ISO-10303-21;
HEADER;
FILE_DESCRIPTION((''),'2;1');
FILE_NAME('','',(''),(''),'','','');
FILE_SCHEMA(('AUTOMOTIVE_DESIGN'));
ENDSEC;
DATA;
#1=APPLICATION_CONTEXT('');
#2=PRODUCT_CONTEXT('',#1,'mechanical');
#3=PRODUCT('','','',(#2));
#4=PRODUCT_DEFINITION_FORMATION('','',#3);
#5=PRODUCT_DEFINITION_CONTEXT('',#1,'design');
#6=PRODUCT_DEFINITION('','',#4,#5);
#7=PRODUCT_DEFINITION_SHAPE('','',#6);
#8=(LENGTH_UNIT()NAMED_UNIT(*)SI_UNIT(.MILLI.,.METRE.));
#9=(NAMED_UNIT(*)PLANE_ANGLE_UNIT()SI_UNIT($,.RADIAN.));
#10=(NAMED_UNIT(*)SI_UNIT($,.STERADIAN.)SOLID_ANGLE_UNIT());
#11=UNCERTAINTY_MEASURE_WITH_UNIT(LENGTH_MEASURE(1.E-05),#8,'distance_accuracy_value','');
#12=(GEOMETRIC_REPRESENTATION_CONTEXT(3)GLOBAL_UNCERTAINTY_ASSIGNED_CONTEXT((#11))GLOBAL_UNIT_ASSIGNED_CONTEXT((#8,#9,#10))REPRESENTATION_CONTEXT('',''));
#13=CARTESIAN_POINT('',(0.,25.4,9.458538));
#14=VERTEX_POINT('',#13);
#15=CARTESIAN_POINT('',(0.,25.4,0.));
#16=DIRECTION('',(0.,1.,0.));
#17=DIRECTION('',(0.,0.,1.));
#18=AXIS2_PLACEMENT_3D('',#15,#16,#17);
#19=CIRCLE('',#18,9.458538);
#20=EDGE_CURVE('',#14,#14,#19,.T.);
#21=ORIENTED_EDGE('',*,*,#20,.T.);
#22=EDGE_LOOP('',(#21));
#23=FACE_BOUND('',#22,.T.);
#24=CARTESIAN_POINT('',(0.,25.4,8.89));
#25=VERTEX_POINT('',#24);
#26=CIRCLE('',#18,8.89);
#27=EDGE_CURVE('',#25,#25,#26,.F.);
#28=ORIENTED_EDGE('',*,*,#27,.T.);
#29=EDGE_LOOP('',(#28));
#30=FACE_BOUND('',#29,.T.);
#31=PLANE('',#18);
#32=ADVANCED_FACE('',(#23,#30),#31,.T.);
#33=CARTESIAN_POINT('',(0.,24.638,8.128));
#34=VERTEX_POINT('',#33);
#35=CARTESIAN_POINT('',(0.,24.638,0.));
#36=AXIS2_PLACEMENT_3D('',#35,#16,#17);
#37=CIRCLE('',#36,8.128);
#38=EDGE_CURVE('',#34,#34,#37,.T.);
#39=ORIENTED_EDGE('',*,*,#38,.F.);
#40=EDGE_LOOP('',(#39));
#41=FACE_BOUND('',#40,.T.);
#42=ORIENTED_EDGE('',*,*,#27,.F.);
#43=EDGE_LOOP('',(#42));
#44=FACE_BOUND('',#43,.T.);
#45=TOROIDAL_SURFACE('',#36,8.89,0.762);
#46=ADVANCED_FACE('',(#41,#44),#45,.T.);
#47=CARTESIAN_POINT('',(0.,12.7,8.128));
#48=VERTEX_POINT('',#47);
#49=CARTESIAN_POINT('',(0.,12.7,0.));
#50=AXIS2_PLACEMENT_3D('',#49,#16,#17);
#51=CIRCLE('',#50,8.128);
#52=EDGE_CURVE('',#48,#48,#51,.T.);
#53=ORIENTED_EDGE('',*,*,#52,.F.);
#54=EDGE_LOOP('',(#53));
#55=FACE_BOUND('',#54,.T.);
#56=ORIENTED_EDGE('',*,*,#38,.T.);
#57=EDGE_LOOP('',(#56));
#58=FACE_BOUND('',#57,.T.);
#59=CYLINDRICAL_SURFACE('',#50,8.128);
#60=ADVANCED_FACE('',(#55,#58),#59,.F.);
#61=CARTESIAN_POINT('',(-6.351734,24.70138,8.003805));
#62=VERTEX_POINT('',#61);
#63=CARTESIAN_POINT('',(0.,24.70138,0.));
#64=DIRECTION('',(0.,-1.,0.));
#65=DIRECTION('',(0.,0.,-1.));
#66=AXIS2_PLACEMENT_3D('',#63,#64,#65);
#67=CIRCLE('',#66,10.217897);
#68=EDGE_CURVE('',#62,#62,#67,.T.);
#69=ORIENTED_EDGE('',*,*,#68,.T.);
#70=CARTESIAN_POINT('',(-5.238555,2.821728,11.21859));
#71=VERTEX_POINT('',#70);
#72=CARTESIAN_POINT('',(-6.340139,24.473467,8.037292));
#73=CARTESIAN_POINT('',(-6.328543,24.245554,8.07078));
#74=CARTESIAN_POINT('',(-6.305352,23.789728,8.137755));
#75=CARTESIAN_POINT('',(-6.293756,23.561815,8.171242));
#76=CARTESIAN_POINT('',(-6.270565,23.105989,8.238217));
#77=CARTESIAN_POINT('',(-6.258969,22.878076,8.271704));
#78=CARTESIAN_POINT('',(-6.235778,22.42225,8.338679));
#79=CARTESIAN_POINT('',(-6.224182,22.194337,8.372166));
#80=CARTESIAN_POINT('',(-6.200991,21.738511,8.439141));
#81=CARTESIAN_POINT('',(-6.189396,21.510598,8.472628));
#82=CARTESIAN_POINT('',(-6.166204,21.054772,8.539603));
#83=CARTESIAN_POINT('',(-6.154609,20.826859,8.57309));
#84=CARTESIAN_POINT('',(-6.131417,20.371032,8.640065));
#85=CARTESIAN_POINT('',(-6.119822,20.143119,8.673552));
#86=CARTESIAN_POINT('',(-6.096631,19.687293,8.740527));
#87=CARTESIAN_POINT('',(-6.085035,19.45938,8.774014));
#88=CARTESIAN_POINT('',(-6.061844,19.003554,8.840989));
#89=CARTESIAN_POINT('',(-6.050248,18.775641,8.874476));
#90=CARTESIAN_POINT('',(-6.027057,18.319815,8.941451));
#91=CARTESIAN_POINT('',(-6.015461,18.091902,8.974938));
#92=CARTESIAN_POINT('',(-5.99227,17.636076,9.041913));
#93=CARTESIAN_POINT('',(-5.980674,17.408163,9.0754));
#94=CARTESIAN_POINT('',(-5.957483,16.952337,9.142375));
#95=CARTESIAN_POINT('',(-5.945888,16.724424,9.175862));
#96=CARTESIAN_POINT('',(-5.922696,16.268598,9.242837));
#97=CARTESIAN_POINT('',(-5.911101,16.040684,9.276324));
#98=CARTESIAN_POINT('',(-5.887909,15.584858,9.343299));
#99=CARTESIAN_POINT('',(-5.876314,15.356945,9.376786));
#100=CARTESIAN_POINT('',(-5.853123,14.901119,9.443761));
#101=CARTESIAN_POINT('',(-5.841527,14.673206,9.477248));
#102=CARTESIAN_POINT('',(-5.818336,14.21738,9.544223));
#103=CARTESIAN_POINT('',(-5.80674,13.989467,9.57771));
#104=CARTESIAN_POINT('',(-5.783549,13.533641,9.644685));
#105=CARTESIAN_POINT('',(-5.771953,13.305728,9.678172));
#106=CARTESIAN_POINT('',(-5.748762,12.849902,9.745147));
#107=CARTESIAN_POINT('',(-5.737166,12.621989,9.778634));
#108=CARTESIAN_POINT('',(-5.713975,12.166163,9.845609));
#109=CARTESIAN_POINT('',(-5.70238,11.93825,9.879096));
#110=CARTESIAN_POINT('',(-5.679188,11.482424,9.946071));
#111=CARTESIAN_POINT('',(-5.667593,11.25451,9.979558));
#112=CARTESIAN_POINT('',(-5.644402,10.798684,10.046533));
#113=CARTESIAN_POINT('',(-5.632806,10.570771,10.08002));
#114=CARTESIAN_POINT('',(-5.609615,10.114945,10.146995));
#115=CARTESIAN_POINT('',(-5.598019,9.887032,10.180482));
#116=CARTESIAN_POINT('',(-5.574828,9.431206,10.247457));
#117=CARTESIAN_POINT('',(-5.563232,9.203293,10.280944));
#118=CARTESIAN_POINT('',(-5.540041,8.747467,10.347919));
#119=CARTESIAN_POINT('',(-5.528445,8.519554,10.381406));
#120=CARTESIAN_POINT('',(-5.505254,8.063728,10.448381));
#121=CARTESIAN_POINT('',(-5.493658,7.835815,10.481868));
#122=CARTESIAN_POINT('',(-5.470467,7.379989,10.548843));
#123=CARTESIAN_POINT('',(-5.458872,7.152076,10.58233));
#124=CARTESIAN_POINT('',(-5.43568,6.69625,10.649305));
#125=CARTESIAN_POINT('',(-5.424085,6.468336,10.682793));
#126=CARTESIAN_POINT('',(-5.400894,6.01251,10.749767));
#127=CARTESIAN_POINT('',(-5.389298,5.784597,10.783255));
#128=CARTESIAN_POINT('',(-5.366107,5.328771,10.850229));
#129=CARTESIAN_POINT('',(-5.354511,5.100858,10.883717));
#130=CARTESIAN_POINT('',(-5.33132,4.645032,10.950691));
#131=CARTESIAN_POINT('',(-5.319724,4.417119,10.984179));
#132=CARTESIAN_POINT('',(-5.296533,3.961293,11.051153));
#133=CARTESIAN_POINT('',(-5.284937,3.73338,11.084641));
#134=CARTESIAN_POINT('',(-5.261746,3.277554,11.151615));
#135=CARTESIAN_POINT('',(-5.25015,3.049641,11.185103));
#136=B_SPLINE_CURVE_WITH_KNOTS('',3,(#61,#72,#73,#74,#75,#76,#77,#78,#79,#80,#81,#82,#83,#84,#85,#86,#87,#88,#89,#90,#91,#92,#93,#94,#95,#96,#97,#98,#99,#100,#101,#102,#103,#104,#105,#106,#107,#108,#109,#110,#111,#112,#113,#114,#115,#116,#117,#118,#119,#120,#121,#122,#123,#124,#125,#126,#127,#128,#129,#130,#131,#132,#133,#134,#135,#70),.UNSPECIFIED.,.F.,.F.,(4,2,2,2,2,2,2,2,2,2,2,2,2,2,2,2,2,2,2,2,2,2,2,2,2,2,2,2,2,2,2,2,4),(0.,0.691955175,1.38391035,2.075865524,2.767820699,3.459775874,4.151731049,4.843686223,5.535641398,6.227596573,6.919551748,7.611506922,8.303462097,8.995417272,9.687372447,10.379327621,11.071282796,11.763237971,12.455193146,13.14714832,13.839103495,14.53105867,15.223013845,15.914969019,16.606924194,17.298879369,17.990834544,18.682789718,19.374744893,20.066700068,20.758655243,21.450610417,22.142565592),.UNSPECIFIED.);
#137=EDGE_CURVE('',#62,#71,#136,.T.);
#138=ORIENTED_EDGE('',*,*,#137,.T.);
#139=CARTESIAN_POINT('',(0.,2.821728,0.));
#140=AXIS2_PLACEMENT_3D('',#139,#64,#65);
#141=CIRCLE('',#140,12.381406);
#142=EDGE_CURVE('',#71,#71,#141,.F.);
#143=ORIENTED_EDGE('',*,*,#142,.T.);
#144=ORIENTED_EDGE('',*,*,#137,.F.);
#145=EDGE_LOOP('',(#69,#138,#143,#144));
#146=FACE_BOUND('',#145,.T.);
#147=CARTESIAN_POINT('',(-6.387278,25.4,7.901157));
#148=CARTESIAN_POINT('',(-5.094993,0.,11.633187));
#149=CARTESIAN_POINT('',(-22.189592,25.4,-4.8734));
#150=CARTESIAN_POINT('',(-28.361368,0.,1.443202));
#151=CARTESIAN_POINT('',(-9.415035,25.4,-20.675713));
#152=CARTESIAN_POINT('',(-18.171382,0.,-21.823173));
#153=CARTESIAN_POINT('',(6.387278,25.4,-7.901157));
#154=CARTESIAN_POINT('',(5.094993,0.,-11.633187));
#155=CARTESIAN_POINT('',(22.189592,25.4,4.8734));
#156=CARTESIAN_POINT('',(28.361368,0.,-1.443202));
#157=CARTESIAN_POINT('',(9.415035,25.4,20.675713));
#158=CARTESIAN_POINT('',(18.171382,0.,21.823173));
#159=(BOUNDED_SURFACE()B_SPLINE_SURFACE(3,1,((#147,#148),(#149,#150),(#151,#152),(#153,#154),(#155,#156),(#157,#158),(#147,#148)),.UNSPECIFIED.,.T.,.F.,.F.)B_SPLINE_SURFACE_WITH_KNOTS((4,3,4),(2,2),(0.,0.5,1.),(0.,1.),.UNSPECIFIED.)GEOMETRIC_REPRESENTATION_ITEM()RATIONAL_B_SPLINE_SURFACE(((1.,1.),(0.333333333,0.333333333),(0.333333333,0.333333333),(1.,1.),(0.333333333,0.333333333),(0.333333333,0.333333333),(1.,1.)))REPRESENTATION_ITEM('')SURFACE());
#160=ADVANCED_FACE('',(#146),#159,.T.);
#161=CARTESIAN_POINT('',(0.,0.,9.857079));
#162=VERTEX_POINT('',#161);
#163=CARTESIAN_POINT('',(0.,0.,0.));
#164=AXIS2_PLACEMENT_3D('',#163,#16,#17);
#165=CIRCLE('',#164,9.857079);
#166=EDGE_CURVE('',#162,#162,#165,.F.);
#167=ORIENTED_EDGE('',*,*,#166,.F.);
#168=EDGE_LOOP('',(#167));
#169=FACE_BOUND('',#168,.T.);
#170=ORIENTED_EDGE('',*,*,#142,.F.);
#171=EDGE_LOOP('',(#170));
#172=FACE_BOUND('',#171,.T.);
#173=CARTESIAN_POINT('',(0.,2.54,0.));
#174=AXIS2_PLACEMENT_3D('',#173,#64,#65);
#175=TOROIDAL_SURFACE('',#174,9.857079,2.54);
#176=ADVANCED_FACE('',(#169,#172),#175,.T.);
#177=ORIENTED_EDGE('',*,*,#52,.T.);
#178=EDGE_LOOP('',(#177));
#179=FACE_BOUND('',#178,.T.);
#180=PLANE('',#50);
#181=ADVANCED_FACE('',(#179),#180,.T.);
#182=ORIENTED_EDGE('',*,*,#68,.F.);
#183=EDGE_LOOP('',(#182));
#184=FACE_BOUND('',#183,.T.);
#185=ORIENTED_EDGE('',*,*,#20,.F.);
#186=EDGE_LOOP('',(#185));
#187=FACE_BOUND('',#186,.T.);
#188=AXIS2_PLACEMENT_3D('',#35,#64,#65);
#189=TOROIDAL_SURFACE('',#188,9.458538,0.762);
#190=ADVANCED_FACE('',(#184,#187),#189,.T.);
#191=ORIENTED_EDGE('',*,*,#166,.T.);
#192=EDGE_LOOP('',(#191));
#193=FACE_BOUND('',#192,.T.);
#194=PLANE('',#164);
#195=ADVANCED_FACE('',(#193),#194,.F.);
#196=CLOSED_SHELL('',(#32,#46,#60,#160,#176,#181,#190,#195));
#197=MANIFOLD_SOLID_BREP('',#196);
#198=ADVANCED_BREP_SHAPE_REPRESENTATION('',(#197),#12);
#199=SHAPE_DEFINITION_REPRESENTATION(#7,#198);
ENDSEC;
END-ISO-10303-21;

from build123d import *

# Parameters (mm, degrees)
SKETCH2_R          = 8.128
CUT_EXTRUDE1_DEPTH = 12.7
FILLET1_R          = 2.54
FILLET2_R          = 0.762


with BuildPart() as part:
    # Loft1: read off the stored shape, not the designer's step
    # Loft1: loft between two sections, ruled curve by curve
    loft1_from = [
        Edge.make_bspline([(-6.387278158, 25.4, 7.901156734), (-22.189591626, 25.4, -4.873399581), (-9.41503531, 25.4, -20.675713049), (6.387278158, 25.4, -7.901156734), (22.189591626, 25.4, 4.873399581), (9.41503531, 25.4, 20.675713049), (-6.387278158, 25.4, 7.901156734)], [0, 0, 0, 0, 0.5, 0.5, 0.5, 1, 1, 1, 1], 3, [1, 0.333333333, 0.333333333, 1, 0.333333333, 0.333333333, 1]),
    ]
    loft1_to = [
        Edge.make_bspline([(-5.094992756, 0, 11.633187388), (-28.361367533, 0, 1.443201876), (-18.17138202, 0, -21.823172901), (5.094992756, 0, -11.633187388), (28.361367533, 0, -1.443201876), (18.17138202, 0, 21.823172901), (-5.094992756, 0, 11.633187388)], [0, 0, 0, 0, 0.5, 0.5, 0.5, 1, 1, 1, 1], 3, [1, 0.333333333, 0.333333333, 1, 0.333333333, 0.333333333, 1]),
    ]
    loft1 = Solid(Shell([*[Face.make_surface_from_curves(loft1_from[k], loft1_to[k]) for k in range(1)], Face(Wire(loft1_from)), Face(Wire(loft1_to))]))
    add(loft1)

    # Sketch2 → Cut-Extrude1 (cut)
    with BuildSketch(Plane(origin=(0, 25.4, 0), x_dir=(1, 0, 0), z_dir=(0, 1, 0))):
        with Locations(Location((0, 0, 0), (0, 0, 270))):
            Circle(SKETCH2_R)
    extrude(amount=-CUT_EXTRUDE1_DEPTH, mode=Mode.SUBTRACT)

    # Fillet1
    fillet1_edges = [part.edges().sort_by_distance(p)[0] for p in [
        (5.094992756, 0, -11.633187388),
    ]]
    fillet(fillet1_edges, radius=FILLET1_R)

    # Fillet2
    fillet2_edges = [part.edges().sort_by_distance(p)[0] for p in [
        (6.387278158, 25.4, -7.901156734),
        (0, 25.4, -8.128),
    ]]
    fillet(fillet2_edges, radius=FILLET2_R)


solid = part.part
